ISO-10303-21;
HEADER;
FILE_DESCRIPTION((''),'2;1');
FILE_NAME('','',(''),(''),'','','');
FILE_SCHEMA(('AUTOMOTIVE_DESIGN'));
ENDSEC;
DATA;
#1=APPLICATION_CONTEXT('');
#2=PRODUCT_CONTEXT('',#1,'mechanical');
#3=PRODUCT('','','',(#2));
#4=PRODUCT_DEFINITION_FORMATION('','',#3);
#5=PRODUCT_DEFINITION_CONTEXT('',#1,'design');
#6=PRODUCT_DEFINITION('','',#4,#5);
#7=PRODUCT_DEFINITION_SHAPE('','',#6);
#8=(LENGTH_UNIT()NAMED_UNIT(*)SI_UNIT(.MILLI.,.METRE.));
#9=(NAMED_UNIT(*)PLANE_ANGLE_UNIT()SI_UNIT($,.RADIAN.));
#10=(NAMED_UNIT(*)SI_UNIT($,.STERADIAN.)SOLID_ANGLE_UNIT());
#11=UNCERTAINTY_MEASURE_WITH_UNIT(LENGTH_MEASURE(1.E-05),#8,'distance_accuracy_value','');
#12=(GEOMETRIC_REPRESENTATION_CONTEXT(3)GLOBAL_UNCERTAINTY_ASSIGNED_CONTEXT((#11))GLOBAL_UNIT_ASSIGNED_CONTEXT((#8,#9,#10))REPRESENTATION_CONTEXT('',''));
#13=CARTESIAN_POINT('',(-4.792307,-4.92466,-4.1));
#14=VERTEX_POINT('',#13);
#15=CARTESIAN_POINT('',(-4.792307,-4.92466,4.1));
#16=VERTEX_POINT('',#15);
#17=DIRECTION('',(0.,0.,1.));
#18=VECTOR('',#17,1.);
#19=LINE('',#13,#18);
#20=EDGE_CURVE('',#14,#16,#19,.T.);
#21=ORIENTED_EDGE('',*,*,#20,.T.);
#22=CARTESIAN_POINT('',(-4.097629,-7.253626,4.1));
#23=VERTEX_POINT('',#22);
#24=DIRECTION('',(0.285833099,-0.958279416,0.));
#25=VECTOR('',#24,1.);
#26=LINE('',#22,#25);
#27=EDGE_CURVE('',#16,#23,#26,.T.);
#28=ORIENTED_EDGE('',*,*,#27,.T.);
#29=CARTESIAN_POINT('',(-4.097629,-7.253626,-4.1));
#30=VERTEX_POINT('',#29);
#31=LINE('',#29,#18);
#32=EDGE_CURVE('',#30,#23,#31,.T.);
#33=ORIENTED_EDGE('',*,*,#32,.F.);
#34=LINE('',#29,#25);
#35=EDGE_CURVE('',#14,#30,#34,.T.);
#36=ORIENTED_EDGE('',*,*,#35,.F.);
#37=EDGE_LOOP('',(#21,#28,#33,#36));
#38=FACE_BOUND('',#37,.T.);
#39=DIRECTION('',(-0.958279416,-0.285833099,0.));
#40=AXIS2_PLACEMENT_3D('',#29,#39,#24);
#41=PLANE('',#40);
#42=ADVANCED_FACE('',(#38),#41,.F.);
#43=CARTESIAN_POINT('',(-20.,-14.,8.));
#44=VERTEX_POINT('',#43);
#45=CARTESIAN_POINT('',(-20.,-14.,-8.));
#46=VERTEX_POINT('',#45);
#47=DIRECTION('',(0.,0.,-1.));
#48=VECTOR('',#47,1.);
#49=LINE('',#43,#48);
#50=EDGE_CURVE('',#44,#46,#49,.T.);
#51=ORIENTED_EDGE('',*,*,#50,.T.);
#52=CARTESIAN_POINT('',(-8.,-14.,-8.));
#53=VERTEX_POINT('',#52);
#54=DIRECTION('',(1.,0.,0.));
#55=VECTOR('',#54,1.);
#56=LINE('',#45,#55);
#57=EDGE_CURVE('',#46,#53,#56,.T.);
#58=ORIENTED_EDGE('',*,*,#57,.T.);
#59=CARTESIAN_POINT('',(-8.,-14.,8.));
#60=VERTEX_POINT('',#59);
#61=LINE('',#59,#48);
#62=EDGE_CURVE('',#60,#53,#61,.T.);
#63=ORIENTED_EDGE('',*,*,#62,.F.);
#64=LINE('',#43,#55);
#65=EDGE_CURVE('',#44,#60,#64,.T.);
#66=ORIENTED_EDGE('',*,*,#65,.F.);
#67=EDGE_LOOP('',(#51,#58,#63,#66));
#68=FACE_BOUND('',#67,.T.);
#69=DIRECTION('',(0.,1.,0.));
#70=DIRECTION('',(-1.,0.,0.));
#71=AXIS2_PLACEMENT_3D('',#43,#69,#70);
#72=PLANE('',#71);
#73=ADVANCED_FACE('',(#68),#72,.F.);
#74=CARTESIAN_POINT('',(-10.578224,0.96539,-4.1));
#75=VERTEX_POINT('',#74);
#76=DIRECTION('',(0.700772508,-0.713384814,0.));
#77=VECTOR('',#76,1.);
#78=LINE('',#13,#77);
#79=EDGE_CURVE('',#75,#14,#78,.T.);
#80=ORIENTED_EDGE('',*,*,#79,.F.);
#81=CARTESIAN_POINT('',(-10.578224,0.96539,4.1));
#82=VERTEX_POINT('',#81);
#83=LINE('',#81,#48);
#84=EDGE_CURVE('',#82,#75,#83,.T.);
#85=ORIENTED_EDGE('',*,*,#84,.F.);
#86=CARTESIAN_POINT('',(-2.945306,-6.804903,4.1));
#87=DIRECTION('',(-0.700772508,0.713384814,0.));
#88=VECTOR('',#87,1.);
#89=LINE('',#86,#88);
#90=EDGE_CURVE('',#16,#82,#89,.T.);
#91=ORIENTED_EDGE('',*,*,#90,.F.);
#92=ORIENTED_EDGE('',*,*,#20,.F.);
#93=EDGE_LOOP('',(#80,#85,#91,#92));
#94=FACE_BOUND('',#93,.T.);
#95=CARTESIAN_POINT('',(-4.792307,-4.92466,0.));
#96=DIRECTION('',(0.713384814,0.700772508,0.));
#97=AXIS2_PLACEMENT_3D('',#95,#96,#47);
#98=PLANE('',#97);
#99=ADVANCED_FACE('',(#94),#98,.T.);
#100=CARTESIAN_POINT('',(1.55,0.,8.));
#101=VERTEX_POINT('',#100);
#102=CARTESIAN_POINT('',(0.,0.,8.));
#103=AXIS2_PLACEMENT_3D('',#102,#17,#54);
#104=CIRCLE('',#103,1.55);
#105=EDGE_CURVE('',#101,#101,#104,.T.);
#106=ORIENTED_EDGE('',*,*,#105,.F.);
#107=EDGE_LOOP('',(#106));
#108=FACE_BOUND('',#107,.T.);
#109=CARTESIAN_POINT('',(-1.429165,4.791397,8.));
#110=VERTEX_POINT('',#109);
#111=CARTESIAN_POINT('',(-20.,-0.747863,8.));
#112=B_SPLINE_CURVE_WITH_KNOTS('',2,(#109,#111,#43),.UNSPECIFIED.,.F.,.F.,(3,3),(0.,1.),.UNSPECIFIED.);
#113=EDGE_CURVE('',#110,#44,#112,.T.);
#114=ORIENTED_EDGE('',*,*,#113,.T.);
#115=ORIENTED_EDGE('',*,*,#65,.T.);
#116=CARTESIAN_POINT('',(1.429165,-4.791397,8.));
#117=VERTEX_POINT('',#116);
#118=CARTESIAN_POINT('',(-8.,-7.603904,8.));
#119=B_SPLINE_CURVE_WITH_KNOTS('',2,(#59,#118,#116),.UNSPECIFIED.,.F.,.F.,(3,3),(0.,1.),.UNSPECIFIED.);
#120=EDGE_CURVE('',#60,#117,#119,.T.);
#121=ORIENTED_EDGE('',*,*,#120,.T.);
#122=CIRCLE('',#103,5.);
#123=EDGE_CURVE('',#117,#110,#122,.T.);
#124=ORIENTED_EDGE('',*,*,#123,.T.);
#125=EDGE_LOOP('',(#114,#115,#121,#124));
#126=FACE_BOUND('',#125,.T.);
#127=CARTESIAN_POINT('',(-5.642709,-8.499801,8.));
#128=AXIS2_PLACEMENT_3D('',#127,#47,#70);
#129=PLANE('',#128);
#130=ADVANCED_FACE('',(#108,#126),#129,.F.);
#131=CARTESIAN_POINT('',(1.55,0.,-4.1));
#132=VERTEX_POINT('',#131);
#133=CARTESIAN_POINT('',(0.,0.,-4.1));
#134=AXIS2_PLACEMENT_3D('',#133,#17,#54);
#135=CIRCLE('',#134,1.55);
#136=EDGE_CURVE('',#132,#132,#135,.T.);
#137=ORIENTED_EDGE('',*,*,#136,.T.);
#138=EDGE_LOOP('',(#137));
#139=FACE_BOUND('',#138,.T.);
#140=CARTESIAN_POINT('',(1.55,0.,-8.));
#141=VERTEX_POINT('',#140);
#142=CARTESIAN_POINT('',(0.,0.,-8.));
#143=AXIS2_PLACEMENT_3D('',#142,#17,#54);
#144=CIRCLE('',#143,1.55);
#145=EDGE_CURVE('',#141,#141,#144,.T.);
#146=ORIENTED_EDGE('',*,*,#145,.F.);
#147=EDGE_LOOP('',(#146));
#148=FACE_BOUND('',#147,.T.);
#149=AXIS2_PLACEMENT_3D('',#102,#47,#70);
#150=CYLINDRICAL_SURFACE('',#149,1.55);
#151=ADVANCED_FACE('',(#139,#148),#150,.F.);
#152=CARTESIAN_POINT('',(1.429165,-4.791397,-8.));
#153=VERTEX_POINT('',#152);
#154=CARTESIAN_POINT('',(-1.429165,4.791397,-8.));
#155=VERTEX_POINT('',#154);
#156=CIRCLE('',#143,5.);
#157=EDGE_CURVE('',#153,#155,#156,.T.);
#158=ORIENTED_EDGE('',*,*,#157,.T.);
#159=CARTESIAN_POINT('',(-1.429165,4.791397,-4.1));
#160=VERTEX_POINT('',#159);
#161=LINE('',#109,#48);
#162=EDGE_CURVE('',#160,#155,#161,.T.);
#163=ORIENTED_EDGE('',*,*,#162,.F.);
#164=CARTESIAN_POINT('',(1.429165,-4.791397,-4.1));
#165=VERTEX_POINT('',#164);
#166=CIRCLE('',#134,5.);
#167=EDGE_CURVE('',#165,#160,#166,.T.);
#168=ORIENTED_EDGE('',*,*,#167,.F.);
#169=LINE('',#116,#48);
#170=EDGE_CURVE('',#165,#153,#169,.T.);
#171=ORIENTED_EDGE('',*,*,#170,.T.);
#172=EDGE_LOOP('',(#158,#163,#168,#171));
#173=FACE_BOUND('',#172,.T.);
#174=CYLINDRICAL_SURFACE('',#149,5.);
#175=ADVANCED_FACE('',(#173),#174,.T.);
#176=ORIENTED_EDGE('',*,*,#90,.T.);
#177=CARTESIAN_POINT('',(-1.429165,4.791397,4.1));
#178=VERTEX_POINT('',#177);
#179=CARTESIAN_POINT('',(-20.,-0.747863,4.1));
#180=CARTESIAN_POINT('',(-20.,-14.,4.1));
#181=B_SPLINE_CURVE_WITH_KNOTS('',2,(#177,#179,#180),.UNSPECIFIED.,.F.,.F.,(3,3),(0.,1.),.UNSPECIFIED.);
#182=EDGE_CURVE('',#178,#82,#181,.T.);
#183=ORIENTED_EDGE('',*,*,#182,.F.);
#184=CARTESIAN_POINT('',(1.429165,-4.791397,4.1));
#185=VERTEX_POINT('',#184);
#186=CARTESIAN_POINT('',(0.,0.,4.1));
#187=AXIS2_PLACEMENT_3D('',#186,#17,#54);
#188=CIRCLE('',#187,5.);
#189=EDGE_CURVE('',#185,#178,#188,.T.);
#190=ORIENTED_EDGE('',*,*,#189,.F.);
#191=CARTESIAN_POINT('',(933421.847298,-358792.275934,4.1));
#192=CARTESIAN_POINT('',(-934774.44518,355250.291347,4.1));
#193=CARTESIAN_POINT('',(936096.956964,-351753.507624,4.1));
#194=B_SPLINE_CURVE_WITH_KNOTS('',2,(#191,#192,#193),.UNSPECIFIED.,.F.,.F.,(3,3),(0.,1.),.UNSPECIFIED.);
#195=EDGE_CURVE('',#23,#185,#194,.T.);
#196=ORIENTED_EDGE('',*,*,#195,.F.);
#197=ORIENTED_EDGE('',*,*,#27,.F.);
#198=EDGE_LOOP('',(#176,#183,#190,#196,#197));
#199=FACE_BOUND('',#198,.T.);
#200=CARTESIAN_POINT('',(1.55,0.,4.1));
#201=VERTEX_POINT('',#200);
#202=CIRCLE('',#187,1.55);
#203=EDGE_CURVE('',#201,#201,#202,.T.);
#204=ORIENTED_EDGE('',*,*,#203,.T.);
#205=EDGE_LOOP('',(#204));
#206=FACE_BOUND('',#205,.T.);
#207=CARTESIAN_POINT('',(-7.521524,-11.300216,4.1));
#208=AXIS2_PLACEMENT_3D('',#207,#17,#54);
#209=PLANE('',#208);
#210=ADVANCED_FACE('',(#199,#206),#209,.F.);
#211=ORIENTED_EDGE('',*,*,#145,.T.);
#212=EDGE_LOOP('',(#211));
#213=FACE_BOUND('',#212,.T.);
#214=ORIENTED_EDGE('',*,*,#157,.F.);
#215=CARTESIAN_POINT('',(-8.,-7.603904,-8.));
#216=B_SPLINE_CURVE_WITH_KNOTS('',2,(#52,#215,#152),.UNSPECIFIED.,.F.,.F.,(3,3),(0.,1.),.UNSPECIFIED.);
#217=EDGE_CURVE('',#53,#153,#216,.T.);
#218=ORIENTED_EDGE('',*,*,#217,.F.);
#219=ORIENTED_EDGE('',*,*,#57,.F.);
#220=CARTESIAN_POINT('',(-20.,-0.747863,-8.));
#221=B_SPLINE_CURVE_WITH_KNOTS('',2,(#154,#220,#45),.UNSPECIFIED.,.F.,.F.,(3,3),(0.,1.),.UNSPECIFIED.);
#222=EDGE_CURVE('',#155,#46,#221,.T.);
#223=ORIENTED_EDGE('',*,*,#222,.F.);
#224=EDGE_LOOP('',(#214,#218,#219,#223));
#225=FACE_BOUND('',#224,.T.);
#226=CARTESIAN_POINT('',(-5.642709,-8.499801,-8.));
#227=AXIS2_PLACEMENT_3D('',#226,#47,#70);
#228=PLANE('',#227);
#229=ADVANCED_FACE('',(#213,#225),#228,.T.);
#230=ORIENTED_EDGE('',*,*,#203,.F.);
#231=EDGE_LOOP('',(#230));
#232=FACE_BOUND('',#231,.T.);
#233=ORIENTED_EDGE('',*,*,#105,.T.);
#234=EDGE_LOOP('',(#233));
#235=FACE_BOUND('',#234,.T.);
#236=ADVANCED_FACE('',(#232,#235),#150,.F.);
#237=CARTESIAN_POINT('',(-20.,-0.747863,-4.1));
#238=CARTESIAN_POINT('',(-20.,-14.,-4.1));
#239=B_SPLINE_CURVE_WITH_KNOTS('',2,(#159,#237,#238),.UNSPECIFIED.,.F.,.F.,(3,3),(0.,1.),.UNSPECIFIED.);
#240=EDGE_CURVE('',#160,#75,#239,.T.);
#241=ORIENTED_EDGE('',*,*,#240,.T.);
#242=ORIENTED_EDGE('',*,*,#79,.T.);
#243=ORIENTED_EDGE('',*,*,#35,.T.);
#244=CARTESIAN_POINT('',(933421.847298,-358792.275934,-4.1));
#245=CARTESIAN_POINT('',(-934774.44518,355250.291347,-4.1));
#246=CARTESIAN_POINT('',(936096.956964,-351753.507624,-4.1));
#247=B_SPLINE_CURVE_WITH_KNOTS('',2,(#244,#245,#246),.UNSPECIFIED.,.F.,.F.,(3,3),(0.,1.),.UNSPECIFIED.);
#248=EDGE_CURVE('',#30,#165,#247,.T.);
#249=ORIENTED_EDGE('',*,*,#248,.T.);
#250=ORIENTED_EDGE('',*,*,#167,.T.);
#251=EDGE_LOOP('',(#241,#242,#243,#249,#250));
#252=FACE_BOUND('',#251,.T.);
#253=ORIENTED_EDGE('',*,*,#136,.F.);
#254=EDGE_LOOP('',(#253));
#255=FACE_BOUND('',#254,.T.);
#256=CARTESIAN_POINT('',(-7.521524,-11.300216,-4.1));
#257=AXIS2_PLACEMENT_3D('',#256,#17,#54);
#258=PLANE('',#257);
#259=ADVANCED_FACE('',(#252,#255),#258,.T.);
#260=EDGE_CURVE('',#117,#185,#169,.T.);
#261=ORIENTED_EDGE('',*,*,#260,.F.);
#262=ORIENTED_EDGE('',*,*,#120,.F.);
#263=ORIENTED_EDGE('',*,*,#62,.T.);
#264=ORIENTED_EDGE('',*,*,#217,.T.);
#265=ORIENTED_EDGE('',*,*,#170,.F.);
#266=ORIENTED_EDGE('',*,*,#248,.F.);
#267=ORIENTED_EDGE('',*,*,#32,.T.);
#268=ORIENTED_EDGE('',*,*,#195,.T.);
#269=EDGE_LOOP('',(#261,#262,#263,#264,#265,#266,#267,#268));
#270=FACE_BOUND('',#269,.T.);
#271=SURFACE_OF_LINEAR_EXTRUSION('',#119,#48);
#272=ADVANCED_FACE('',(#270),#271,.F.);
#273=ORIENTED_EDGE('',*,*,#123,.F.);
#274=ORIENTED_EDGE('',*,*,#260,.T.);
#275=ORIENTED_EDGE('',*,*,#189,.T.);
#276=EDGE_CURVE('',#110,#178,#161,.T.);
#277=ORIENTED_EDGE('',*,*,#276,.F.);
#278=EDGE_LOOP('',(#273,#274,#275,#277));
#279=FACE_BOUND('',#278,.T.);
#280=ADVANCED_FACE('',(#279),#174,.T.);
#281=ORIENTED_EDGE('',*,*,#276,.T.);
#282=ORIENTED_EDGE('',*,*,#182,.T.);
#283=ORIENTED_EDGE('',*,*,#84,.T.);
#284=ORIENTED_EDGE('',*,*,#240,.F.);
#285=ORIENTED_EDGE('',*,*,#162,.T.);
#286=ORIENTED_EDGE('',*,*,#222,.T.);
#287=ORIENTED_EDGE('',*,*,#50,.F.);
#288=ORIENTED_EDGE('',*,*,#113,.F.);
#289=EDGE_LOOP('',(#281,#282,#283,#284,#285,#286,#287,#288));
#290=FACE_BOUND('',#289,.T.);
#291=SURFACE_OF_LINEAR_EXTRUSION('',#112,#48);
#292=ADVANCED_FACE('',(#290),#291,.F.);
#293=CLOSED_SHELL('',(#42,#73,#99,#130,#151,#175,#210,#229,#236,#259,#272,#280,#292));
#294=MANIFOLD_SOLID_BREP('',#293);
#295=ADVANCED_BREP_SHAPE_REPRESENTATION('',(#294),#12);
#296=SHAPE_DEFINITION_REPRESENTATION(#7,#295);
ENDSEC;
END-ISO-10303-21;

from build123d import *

# Parameters (mm, degrees)
SKETCH1_R           = 1.55
BOSS_EXTRUDE1_DEPTH = 8
CUT_EXTRUDE1_DEPTH  = 4.1
CHAMFER1_START      = -4.1
CHAMFER1_DEPTH      = 8.2


with BuildPart() as part:
    # Sketch1 → Boss-Extrude1 (new, symmetric)
    with BuildSketch(Plane.XY):
        with BuildLine():
            Line((-20, -14), (-8, -14))
            add(Edge.make_bspline(
                [(1.429165494, -4.791397081), (-8, -7.603904107), (-8, -14)],
                knots=[0, 0, 0, 1, 1, 1], degree=2))
            ThreePointArc((1.429165494, -4.791397081), (4.791397081, 1.429165494), (-1.429165494, 4.791397081))
            add(Edge.make_bspline(
                [(-1.429165494, 4.791397081), (-20, -0.747863266), (-20, -14)],
                knots=[0, 0, 0, 1, 1, 1], degree=2))
        make_face()
        Circle(SKETCH1_R, mode=Mode.SUBTRACT)
    extrude(amount=BOSS_EXTRUDE1_DEPTH, both=True)

    # Sketch2 → Cut-Extrude1 (cut, symmetric)
    with BuildSketch(Plane.XY):
        with BuildLine():
            Line((-4.097628997, -7.253626281), (-7.078971892, 2.741575612))
            add(Edge.make_bspline(
                [(-1.429165494, 4.791397081), (-4.509542465, 3.872590228), (-7.078971892, 2.741575612)],
                knots=[0, 0, 0, 1, 1, 1], degree=2))
            ThreePointArc((-1.429165494, 4.791397081), (4.791397081, 1.429165494), (1.429165494, -4.791397081))
            add(Edge.make_bspline(
                [(-4.097628997, -7.253626281), (-1.934020936, -5.794559606), (1.429165494, -4.791397081)],
                knots=[0, 0, 0, 1, 1, 1], degree=2))
        make_face()
    extrude(amount=CUT_EXTRUDE1_DEPTH, both=True, mode=Mode.SUBTRACT)

    # Chamfer1: read off the stored shape, not the designer's step
    # Chamfer1 outline → Chamfer1 (cut)
    with BuildSketch(Plane.XY.offset(CHAMFER1_START)):
        with BuildLine():
            Line((-10.578223544, 0.965390038), (-4.792307112, -4.924659687))
            Line((-4.792307112, -4.924659687), (-7.078971892, 2.741575612))
            add(Edge.make_bspline(
                [(-7.078971892, 2.741575612), (-8.966458483, 1.910739435), (-10.578223544, 0.965390038)],
                knots=[0.165871758, 0.165871758, 0.165871758, 0.287720102, 0.287720102, 0.287720102], degree=2))
        make_face()
    extrude(amount=CHAMFER1_DEPTH, mode=Mode.SUBTRACT)


solid = part.part
